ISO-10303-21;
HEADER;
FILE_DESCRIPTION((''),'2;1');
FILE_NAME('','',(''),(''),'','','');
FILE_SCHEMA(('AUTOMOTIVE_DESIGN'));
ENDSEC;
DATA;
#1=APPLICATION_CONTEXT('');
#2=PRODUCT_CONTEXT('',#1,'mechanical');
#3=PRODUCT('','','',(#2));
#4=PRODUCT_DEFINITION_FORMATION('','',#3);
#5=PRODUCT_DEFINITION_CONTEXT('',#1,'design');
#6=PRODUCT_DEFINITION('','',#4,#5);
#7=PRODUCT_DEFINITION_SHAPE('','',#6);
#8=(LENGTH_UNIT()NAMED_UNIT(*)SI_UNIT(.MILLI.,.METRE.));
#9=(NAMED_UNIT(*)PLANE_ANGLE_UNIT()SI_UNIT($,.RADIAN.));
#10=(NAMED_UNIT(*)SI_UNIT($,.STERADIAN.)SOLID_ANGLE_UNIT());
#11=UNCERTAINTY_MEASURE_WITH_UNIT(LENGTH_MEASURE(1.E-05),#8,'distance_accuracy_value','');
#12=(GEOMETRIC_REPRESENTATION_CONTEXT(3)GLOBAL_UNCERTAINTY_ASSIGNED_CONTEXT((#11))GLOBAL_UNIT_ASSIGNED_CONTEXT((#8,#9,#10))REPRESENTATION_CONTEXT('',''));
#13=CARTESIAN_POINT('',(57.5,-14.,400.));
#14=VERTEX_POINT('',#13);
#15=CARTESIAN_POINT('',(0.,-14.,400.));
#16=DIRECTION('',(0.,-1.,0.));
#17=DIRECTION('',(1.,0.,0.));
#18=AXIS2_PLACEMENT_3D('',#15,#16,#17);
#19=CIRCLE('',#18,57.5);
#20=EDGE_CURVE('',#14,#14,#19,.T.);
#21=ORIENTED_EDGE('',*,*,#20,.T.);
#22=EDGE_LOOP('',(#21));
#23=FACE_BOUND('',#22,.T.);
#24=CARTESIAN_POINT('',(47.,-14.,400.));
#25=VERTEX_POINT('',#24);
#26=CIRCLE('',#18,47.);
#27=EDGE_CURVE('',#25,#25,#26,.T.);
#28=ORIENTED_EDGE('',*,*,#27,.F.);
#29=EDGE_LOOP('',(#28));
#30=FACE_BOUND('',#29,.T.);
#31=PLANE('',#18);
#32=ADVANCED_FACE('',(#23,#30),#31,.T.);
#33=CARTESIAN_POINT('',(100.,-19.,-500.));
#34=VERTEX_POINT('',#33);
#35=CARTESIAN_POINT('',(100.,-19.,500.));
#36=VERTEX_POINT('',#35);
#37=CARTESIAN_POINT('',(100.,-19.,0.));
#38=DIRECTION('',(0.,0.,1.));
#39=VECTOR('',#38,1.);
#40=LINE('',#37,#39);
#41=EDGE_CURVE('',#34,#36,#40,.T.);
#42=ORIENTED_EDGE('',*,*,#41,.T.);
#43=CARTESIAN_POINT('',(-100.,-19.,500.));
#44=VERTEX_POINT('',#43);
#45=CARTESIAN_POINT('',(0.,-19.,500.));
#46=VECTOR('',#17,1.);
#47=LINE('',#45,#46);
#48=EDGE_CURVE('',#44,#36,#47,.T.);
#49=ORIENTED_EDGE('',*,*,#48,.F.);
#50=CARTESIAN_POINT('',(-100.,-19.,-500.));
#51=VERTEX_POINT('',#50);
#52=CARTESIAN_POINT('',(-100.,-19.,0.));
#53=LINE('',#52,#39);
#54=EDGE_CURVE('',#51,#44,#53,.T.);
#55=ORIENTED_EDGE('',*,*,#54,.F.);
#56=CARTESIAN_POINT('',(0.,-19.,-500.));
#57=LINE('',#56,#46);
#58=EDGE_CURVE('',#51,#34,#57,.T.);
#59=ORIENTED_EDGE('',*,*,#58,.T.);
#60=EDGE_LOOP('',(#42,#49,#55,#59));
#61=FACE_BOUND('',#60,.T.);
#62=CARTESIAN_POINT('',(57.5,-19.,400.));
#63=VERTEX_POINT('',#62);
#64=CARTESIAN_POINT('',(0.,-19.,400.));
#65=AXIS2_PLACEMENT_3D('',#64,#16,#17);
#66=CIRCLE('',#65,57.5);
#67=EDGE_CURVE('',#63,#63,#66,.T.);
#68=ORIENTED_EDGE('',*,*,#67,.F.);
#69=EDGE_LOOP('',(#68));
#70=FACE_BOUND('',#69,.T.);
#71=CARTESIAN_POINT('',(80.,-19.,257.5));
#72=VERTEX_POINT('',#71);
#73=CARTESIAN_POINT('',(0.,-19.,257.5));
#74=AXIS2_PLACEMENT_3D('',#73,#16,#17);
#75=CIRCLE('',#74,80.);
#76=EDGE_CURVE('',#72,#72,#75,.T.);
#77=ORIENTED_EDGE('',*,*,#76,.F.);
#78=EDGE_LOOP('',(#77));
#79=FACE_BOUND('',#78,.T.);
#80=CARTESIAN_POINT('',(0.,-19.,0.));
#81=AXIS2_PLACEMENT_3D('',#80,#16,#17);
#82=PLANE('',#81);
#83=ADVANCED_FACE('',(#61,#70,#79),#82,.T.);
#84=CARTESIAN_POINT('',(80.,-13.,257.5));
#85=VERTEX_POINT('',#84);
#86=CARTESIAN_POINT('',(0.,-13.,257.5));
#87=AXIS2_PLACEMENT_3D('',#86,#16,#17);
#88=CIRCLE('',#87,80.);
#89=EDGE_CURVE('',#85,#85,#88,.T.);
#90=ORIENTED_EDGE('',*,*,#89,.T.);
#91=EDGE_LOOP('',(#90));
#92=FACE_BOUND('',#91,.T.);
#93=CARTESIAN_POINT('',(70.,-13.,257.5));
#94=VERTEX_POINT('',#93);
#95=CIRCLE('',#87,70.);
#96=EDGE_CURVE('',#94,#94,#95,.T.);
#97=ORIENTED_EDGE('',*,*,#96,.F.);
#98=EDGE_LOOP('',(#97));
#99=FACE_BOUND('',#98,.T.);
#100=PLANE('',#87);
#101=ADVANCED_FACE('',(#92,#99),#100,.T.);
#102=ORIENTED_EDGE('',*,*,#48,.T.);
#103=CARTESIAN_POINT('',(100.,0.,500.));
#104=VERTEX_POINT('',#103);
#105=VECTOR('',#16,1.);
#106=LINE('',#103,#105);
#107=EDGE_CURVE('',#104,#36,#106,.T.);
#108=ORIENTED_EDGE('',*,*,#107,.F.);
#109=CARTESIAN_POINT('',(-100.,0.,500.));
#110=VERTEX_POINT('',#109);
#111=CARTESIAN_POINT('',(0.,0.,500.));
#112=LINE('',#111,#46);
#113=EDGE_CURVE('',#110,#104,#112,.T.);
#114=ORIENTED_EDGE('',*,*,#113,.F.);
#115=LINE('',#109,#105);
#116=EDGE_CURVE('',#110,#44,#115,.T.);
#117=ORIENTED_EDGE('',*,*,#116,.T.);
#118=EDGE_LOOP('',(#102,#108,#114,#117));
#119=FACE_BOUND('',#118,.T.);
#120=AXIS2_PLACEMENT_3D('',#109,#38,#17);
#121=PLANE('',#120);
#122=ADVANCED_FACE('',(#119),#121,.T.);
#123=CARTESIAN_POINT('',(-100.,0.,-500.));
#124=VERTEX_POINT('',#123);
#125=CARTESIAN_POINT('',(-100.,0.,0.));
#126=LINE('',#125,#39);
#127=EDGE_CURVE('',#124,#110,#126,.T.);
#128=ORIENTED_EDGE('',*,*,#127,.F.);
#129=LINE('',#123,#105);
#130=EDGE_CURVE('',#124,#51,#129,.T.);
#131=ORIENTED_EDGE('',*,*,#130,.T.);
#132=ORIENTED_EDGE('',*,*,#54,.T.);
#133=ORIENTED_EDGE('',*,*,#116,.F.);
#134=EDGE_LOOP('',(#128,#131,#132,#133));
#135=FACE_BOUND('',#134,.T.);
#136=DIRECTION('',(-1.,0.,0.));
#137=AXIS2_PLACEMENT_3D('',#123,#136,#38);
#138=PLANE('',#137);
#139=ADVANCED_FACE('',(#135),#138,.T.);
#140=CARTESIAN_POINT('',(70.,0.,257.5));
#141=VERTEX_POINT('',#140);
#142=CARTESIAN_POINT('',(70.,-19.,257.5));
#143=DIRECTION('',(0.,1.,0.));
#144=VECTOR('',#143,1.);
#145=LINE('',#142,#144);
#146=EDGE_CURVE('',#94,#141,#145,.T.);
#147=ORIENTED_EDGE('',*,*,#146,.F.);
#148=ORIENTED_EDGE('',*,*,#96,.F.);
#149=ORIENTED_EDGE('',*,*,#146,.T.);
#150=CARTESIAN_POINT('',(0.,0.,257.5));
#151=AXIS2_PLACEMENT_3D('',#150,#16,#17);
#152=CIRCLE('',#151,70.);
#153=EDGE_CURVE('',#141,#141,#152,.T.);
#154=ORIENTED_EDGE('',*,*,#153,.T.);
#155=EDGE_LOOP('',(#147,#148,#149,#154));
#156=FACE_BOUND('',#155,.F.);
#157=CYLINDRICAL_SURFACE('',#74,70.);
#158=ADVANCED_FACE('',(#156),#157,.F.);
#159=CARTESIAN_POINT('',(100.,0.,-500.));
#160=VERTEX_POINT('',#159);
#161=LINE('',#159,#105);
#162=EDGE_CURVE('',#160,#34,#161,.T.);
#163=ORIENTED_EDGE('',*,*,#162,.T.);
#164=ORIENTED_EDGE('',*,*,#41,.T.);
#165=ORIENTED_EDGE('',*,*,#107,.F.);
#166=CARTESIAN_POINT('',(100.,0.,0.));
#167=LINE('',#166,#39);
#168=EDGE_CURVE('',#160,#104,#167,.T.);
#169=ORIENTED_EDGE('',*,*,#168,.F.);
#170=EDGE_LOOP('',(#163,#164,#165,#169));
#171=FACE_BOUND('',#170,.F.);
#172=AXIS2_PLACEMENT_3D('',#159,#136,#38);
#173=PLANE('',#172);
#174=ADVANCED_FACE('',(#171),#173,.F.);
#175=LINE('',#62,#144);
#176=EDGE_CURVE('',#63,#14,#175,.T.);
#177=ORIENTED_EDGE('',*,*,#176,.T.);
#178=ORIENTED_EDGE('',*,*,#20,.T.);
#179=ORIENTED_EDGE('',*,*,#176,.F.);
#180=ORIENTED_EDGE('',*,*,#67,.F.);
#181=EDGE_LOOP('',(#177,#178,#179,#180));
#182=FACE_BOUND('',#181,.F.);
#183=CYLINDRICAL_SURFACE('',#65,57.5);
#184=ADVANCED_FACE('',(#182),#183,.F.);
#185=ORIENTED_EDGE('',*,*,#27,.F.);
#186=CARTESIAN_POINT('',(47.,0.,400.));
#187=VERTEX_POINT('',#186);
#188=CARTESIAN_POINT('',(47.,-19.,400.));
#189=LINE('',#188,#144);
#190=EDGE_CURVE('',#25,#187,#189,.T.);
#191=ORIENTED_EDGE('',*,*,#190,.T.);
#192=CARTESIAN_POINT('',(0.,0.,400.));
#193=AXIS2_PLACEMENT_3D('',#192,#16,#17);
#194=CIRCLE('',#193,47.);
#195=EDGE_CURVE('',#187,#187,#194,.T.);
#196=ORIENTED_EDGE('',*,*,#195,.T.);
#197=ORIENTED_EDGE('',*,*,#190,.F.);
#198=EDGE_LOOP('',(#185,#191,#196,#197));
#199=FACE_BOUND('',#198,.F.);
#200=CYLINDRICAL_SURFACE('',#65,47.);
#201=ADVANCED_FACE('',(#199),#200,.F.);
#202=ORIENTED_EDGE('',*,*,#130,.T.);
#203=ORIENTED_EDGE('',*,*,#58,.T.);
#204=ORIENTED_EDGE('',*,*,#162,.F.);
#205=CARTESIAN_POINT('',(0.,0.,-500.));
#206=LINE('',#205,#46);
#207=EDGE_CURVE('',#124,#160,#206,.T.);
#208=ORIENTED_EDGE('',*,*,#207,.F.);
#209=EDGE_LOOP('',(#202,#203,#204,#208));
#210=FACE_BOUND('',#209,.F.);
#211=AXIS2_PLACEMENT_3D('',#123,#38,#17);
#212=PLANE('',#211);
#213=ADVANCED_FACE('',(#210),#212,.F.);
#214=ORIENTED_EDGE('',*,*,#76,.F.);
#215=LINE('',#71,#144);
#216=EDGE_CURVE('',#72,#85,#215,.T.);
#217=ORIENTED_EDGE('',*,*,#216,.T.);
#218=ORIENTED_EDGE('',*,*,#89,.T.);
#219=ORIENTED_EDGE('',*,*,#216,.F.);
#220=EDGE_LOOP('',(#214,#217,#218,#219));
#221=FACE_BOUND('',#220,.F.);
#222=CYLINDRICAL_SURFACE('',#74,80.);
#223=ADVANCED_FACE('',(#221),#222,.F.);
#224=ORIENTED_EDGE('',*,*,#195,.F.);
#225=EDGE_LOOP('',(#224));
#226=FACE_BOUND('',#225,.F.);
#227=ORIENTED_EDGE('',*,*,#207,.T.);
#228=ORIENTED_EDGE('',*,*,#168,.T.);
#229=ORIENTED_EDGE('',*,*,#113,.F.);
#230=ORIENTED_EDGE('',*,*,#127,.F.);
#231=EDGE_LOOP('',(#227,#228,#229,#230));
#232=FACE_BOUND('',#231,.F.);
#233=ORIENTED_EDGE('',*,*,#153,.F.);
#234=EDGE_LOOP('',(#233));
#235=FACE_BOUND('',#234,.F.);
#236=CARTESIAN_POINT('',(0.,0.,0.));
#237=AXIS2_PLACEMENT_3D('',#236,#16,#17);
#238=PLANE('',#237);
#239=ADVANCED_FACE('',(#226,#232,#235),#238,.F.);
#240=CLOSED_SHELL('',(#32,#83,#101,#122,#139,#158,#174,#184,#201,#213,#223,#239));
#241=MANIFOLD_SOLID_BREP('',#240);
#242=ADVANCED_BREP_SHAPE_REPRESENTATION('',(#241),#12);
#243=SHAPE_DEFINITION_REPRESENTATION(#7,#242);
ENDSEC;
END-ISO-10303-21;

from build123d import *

# Parameters (mm, degrees)
F0_W     = 200
F0_H     = 1000
F1_DEPTH = 19
F2_R     = 57.5
F3_DEPTH = 5
F4_R     = 47
F5_DEPTH = 25
F6_R     = 80
F7_DEPTH = 6
F8_R     = 70
F9_DEPTH = 25


# Not quite as in the source:
# - a feature names something its author has since deleted; it is built from what else it names


with BuildPart() as f1:
    # F0 (on Front) → F1 (new body)
    with BuildSketch(Plane.XZ):
        Rectangle(F0_W, F0_H)
    extrude(amount=F1_DEPTH)

    # F2 (on face) → F3 (cut)
    with BuildSketch(Plane.XZ.offset(19)):
        with Locations((0, 400)):
            Circle(F2_R)
    extrude(amount=-F3_DEPTH, mode=Mode.SUBTRACT)

    # F4 (on face) → F5 (cut)
    with BuildSketch(Plane.XZ.offset(19)):
        with Locations((0, 400)):
            Circle(F4_R)
    extrude(amount=-F5_DEPTH, mode=Mode.SUBTRACT)

    # F6 (on face) → F7 (cut)
    with BuildSketch(Plane.XZ.offset(19)):
        with Locations((0, 257.5)):
            Circle(F6_R)
    extrude(amount=-F7_DEPTH, mode=Mode.SUBTRACT)

    # F8 (on face) + F0 (on Front) → F9 (cut)
    with BuildSketch(Plane.XZ.offset(19)):
        with Locations((0, 257.5)):
            Circle(F8_R)
    with BuildSketch(Plane.XZ):
        Rectangle(F0_W, F0_H)
    extrude(amount=-F9_DEPTH, mode=Mode.SUBTRACT)


solid = f1.part
